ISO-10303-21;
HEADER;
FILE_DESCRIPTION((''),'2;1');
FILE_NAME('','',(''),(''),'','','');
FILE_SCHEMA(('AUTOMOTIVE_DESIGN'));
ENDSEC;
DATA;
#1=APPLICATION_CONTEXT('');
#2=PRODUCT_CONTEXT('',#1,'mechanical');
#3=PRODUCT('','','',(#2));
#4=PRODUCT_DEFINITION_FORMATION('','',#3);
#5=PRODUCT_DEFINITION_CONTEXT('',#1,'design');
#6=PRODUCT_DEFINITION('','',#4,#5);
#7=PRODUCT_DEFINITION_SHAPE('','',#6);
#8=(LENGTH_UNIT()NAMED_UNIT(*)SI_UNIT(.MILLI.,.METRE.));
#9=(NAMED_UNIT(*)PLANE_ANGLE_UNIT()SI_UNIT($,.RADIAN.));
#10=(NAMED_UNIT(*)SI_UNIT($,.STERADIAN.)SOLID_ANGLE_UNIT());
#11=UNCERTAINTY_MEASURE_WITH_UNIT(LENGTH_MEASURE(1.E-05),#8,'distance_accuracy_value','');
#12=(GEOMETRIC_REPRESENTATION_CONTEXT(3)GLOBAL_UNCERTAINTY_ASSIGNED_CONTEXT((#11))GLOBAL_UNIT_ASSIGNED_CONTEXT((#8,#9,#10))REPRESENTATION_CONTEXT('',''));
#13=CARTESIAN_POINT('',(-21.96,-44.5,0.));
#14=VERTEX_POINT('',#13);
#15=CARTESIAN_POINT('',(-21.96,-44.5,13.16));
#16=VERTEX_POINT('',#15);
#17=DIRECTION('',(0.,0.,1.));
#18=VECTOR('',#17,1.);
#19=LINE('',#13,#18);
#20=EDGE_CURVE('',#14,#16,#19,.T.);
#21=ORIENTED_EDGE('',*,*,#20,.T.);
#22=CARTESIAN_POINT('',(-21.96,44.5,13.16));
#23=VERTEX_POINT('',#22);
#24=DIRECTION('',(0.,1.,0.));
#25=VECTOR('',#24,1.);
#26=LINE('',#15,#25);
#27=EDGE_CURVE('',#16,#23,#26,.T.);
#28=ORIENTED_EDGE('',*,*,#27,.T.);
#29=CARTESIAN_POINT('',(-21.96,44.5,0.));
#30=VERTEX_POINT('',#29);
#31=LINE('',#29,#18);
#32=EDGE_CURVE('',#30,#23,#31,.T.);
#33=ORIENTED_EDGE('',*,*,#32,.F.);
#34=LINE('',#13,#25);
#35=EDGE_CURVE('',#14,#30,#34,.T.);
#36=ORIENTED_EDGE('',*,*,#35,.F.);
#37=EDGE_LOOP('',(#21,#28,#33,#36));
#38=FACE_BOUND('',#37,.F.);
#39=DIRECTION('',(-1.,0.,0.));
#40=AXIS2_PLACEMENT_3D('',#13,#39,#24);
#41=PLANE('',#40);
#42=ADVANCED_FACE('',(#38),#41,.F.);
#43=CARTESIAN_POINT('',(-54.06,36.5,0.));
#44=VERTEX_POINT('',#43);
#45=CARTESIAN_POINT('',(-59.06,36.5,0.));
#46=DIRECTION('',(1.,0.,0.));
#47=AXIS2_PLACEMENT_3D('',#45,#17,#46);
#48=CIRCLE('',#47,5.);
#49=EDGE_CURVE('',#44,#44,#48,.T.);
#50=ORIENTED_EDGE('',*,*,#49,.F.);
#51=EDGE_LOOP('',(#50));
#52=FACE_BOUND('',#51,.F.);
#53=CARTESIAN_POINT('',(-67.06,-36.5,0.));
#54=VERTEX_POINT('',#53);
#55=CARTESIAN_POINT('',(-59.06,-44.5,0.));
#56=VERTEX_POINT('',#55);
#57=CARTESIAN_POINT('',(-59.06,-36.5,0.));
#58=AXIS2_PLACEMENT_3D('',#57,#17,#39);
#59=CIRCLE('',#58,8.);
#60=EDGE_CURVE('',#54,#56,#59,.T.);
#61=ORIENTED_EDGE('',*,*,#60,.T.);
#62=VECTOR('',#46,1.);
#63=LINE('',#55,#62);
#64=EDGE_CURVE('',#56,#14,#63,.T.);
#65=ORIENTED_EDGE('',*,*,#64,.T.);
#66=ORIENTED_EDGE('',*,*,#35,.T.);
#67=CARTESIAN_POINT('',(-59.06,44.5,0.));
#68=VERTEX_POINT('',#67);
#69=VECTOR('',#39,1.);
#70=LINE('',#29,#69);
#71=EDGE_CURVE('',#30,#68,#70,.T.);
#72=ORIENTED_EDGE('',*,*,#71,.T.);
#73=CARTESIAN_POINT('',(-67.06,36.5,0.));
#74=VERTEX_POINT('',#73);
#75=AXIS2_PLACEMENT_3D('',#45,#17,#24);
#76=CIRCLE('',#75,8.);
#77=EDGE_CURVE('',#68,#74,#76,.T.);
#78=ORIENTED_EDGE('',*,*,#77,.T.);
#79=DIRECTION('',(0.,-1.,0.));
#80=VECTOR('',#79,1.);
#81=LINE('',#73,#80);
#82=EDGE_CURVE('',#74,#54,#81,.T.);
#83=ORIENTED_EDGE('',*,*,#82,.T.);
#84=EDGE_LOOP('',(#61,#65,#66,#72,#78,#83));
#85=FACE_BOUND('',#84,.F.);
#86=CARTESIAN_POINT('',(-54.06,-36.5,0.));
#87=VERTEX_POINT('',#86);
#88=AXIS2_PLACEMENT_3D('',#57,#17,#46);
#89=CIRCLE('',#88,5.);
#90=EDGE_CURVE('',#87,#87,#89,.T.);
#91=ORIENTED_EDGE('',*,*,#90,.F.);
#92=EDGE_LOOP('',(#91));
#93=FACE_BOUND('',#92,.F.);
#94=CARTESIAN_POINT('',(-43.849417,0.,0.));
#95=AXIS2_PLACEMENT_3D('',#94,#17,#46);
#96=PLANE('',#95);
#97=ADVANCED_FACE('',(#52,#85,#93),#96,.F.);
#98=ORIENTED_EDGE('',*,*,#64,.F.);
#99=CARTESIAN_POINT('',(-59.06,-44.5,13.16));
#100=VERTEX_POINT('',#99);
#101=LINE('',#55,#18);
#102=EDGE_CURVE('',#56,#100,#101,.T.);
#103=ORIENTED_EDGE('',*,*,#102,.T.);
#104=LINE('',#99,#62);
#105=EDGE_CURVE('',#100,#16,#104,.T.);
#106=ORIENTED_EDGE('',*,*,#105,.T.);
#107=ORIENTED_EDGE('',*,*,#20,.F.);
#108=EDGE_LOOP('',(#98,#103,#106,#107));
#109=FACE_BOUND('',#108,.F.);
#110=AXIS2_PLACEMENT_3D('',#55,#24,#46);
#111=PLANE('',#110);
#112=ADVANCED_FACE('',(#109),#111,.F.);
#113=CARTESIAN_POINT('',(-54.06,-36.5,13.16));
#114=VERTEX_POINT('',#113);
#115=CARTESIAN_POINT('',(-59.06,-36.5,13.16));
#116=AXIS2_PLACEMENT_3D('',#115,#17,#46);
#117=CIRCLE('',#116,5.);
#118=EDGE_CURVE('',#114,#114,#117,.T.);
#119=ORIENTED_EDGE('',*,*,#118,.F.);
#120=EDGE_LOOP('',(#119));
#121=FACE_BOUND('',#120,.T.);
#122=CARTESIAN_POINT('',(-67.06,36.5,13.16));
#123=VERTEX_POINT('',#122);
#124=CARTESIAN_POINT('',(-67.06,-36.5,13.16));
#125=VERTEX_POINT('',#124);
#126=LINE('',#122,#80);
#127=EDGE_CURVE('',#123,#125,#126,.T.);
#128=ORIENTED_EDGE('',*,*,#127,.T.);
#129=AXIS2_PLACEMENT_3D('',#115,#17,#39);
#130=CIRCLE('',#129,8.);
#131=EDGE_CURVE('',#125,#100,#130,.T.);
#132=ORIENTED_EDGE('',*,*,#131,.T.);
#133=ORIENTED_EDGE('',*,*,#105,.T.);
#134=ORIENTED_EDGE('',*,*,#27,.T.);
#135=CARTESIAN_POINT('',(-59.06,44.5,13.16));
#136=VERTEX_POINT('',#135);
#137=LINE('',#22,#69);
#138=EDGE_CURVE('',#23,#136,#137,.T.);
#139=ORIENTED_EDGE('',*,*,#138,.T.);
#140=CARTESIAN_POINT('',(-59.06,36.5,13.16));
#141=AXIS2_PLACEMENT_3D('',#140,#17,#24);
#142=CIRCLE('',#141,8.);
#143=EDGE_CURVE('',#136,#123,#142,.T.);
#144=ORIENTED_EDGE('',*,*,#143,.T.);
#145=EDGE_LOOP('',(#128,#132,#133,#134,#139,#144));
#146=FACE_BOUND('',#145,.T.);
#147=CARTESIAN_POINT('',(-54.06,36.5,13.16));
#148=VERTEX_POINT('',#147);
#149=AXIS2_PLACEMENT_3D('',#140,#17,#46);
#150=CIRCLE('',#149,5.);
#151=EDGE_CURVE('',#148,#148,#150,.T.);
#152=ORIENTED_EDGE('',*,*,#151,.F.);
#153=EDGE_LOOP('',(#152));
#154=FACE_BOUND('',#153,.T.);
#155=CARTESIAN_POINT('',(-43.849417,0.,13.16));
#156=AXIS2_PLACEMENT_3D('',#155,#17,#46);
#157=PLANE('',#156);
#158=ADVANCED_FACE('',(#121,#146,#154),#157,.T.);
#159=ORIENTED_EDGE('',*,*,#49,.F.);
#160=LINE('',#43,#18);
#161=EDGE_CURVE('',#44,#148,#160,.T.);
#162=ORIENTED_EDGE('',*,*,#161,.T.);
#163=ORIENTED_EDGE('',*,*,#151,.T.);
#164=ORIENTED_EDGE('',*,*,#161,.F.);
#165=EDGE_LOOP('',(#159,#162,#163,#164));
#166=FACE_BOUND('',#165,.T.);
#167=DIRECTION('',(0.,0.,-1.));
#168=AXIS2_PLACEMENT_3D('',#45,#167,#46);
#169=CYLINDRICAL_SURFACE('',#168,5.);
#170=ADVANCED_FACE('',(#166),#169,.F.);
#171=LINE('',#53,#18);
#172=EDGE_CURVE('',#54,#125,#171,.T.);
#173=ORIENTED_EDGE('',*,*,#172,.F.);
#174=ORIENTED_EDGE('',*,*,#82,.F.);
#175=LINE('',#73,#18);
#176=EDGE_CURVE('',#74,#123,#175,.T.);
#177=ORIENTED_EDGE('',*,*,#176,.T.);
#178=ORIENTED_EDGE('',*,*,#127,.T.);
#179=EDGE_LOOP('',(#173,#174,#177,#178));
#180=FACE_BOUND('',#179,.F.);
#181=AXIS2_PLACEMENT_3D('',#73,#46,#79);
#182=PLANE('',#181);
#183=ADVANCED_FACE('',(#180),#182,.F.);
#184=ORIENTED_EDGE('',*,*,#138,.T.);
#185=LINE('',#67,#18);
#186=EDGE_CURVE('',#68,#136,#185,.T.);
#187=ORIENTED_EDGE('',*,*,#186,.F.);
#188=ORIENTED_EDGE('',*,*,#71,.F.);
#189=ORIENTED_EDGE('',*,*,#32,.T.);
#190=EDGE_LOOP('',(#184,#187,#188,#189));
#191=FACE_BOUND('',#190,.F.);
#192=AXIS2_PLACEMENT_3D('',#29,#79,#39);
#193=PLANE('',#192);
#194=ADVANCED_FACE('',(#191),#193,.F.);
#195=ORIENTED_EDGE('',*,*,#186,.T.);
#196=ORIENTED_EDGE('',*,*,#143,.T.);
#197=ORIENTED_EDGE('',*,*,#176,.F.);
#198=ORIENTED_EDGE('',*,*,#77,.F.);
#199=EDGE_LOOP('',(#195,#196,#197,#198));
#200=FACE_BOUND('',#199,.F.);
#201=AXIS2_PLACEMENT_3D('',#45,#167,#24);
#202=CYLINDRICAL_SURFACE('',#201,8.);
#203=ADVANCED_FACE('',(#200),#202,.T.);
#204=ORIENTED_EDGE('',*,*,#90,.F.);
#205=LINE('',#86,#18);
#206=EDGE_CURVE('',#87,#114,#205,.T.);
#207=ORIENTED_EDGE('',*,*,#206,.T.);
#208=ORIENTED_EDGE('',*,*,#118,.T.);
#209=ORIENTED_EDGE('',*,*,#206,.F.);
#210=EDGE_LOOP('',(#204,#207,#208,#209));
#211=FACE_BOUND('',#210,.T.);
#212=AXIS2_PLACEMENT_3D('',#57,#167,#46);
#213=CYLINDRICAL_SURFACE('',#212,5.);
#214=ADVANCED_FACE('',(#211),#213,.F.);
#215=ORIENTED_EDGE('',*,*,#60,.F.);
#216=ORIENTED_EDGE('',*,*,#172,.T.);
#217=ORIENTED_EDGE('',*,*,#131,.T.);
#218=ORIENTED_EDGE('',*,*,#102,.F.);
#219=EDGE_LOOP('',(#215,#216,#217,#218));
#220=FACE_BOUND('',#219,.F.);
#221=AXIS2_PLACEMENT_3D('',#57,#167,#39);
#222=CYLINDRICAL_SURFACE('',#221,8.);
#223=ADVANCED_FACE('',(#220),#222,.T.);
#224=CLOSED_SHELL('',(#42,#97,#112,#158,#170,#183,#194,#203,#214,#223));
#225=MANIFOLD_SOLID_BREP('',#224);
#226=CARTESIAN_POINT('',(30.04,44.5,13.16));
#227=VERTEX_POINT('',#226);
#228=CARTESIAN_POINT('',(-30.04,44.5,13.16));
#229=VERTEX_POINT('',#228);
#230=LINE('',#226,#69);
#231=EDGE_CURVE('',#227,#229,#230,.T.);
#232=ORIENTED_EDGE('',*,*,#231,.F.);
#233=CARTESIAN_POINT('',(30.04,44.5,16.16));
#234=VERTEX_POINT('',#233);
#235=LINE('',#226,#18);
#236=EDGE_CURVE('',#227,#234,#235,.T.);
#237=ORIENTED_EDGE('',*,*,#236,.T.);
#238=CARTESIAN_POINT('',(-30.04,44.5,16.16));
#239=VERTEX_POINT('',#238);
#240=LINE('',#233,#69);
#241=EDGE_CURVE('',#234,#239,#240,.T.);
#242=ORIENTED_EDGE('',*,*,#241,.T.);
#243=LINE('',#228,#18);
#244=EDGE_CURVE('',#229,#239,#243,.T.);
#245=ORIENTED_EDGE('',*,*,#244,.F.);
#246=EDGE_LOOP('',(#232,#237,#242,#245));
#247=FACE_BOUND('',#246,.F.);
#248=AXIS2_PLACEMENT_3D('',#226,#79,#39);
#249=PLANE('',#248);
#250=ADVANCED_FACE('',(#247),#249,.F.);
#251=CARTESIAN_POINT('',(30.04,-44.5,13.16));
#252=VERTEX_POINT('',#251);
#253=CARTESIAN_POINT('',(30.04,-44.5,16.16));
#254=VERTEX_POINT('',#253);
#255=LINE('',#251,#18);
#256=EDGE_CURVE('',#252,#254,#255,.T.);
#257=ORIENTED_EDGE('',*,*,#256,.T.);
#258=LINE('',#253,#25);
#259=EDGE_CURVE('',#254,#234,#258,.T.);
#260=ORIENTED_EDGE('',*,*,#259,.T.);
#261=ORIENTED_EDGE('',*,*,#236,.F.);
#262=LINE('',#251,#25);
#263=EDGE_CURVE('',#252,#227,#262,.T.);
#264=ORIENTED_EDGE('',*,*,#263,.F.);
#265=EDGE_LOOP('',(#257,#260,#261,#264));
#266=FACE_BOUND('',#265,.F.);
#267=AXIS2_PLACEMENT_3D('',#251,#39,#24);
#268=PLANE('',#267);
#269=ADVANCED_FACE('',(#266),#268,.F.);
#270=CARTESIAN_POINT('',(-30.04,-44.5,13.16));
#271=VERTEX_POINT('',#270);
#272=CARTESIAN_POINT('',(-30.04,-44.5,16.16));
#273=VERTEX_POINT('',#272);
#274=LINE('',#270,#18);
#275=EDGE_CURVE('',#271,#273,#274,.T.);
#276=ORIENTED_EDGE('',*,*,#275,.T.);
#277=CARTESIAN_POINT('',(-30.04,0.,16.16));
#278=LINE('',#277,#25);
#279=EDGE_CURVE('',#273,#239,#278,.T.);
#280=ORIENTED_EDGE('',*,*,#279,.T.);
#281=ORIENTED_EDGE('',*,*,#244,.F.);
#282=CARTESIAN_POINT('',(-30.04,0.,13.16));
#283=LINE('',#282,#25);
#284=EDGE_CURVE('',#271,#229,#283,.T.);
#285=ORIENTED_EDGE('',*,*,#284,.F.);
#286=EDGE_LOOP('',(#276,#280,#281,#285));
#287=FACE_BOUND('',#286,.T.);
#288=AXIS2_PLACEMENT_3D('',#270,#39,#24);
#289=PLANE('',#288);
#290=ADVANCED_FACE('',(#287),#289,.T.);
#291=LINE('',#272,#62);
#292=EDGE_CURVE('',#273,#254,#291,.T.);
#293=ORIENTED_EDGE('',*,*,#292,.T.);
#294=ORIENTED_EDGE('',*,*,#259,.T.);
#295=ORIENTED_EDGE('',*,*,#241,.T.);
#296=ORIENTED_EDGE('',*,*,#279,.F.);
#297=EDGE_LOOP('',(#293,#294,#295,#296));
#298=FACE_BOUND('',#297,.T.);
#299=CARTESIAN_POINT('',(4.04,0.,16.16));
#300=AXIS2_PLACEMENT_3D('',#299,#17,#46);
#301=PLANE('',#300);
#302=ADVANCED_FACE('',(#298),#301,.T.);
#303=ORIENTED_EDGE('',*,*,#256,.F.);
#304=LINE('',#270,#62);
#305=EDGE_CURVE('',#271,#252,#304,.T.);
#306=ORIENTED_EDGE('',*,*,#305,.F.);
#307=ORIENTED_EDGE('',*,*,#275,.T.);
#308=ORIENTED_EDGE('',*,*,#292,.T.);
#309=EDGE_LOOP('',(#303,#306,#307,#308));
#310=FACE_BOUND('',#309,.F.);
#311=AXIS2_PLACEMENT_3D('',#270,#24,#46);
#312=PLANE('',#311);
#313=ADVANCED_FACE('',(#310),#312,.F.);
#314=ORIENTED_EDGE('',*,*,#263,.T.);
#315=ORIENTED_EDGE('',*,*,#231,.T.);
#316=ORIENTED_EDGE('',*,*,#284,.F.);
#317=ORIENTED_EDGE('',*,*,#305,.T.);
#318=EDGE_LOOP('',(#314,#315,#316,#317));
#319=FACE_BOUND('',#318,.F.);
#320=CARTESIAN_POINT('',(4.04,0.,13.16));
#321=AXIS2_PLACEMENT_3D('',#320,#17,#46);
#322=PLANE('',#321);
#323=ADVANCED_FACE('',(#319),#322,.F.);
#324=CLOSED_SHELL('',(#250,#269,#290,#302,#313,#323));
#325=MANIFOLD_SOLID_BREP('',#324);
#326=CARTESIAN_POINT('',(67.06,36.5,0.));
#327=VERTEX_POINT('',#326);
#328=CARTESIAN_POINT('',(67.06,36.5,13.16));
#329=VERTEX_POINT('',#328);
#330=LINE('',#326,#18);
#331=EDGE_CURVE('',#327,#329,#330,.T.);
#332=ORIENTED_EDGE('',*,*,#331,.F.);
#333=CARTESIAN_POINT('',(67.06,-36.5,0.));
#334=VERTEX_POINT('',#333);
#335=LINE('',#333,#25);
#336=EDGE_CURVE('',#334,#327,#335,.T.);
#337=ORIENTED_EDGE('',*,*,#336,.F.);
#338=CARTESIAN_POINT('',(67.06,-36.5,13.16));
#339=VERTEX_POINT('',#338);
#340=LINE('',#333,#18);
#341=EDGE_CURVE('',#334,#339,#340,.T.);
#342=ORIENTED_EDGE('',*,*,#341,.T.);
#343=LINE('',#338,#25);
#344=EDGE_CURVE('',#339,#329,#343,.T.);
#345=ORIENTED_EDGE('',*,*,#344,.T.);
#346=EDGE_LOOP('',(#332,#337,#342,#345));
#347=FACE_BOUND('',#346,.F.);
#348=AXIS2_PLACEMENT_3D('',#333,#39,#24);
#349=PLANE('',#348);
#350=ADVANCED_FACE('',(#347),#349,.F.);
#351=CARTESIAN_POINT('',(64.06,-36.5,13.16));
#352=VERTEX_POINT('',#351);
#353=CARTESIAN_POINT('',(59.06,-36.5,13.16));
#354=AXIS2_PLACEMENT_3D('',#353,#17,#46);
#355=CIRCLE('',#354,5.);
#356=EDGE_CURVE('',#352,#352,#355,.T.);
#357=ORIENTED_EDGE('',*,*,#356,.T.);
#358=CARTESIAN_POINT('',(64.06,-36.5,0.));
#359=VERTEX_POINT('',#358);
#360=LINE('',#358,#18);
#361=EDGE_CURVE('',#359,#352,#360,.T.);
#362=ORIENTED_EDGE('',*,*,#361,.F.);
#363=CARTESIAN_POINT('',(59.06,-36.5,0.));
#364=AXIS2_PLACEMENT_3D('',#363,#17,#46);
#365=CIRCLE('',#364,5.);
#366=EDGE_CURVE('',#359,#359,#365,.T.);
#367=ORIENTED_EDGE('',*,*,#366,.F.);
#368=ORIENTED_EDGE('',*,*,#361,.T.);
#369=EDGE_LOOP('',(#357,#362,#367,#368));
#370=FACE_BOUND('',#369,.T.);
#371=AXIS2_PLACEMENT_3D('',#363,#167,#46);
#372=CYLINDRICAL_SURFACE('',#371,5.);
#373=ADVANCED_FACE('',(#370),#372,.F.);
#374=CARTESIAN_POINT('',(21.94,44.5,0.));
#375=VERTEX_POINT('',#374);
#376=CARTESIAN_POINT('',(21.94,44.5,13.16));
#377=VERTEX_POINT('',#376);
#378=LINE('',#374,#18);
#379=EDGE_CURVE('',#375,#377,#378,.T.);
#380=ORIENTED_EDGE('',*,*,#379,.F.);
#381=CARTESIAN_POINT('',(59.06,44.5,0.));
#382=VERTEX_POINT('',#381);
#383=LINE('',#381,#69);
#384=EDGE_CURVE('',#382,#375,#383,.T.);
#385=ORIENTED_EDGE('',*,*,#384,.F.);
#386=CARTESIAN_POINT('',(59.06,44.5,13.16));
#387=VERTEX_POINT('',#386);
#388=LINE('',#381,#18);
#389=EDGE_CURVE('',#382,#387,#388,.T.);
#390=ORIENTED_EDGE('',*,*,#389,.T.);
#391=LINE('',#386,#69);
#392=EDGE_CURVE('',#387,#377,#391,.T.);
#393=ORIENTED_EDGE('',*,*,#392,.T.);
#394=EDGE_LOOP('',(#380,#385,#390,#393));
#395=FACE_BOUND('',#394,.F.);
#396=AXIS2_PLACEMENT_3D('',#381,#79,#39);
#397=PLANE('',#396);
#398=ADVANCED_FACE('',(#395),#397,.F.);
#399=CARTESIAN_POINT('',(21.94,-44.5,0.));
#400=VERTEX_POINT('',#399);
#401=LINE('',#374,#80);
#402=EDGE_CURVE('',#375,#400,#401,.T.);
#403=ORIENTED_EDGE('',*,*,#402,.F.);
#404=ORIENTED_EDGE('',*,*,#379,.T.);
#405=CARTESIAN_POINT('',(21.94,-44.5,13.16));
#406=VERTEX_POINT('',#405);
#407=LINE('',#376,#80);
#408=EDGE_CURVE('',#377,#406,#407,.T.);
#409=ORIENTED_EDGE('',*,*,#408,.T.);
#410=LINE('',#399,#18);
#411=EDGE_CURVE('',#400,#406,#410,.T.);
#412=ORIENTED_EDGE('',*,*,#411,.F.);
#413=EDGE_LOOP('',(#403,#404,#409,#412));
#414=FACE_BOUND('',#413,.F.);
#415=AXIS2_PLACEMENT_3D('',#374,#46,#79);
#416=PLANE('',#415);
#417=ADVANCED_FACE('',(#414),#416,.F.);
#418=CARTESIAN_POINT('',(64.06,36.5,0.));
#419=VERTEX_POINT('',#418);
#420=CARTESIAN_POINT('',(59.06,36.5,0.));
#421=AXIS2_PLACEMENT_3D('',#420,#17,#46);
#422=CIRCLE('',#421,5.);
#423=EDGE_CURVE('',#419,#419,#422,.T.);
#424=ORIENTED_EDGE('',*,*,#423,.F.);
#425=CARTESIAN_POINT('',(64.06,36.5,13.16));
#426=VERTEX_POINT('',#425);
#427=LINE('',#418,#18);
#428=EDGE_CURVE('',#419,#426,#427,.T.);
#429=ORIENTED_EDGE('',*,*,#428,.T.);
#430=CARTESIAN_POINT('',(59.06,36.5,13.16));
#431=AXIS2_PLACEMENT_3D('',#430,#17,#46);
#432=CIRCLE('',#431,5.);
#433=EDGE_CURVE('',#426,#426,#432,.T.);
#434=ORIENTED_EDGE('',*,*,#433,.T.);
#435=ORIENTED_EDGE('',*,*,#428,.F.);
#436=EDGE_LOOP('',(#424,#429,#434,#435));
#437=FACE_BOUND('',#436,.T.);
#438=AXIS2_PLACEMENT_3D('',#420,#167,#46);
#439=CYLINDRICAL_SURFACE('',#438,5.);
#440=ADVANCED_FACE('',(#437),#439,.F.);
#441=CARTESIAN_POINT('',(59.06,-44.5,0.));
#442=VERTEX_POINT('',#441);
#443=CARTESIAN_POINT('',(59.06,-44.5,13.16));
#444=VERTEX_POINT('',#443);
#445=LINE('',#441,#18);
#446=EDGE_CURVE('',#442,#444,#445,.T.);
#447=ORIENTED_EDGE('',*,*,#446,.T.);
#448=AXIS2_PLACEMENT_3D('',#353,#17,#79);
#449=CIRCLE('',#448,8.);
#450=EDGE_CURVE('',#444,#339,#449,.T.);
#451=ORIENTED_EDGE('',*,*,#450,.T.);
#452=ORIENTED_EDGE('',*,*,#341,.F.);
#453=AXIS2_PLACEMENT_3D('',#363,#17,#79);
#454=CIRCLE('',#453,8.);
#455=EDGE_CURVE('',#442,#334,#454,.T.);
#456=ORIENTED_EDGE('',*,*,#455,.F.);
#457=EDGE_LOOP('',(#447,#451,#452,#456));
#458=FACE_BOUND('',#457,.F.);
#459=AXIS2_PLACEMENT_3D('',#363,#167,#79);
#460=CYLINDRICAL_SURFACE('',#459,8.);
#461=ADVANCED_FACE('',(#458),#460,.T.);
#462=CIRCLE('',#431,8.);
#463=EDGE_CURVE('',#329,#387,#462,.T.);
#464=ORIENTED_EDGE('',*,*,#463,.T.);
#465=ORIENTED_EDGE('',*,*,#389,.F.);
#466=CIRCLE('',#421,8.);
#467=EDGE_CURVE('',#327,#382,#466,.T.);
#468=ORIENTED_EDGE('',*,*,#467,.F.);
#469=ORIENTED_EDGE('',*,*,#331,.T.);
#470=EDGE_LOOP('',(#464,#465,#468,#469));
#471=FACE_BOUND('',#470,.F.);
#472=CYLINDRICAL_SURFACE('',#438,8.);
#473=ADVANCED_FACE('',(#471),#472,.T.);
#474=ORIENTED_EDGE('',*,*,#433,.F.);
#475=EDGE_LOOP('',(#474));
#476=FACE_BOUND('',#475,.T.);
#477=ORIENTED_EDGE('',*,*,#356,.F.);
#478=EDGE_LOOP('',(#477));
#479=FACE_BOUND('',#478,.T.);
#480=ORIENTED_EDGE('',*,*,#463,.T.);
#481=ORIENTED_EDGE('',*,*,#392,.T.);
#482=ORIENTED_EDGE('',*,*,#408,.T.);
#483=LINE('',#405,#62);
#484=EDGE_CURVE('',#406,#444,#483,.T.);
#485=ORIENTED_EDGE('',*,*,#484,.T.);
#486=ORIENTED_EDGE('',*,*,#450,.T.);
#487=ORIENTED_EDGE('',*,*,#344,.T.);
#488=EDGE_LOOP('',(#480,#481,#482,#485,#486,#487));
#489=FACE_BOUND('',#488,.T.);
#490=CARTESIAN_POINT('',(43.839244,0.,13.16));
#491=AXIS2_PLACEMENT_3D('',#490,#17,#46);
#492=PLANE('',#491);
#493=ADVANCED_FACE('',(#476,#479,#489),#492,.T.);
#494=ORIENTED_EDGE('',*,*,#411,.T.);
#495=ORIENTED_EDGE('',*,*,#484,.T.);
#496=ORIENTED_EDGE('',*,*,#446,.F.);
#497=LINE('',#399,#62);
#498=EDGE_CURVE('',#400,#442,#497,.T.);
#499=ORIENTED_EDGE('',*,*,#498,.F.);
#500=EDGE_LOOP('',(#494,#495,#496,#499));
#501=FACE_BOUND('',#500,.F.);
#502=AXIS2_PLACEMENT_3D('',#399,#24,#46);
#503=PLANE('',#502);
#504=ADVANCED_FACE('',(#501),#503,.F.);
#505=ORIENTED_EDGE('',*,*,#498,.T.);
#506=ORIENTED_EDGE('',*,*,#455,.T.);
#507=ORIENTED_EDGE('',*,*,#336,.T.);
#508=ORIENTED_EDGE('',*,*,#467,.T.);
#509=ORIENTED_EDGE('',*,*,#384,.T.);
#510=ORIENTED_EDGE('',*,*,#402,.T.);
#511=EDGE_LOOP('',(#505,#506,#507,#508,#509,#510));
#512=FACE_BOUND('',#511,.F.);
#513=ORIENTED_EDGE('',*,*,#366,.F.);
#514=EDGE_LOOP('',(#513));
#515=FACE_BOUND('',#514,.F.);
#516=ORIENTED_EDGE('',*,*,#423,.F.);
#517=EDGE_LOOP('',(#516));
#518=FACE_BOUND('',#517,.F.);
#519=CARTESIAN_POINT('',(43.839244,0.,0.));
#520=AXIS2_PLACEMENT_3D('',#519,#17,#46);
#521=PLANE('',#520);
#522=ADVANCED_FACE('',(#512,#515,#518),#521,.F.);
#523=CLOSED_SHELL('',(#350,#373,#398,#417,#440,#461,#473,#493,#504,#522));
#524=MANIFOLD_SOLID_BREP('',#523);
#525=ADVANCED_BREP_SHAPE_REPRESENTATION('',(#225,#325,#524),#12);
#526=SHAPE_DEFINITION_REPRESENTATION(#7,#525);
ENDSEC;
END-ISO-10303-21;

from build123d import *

# Parameters (mm, degrees)
F0_R     = 5
F1_DEPTH = 13.16
F2_W     = 8.08
F2_H     = 89
F3_DEPTH = 3
F4_DEPTH = 170


# Not quite as in the source:
# - an extrude ends at something that could not be found from the text; its depth is read off the source's solid


with BuildPart() as f1:
    # F0 (on Top) → F1 (new body)
    with BuildSketch(Plane.XY):
        with BuildLine():
            Line((-59.06, -44.5), (-21.96, -44.5))
            Line((-21.96, -44.5), (-21.96, 44.5))
            Line((-21.96, 44.5), (-59.06, 44.5))
            ThreePointArc((-59.06, 44.5), (-64.7168542495, 42.1568542495), (-67.06, 36.5))
            Line((-67.06, 36.5), (-67.06, -36.5))
            ThreePointArc((-67.06, -36.5), (-64.7168542495, -42.1568542495), (-59.06, -44.5))
        make_face()
        with Locations((-59.06, -36.5)):
            Circle(F0_R, mode=Mode.SUBTRACT)
        with Locations((-59.06, 36.5)):
            Circle(F0_R, mode=Mode.SUBTRACT)
    extrude(amount=F1_DEPTH)

    # F0 (on Top) → F4 (cut, through all)
    with BuildSketch(Plane.XY):
        with Locations((59.06, -36.5)):
            Circle(F0_R)
        with Locations((-59.06, -36.5)):
            Circle(F0_R)
        with Locations((-59.06, 36.5)):
            Circle(F0_R)
        with Locations((59.06, 36.5)):
            Circle(F0_R)
    extrude(amount=-F4_DEPTH, mode=Mode.SUBTRACT)


with BuildPart() as f1b:
    # F0 (on Top) → F1, piece 2 (new body)
    with BuildSketch(Plane.XY):
        with BuildLine():
            Line((21.94, -44.5), (59.06, -44.5))
            ThreePointArc((59.06, -44.5), (64.7168542495, -42.1568542495), (67.06, -36.5))
            Line((67.06, -36.5), (67.06, 36.5))
            ThreePointArc((67.06, 36.5), (64.7168542495, 42.1568542495), (59.06, 44.5))
            Line((59.06, 44.5), (21.94, 44.5))
            Line((21.94, 44.5), (21.94, -44.5))
        make_face()
        with Locations((59.06, -36.5)):
            Circle(F0_R, mode=Mode.SUBTRACT)
        with Locations((59.06, 36.5)):
            Circle(F0_R, mode=Mode.SUBTRACT)
    extrude(amount=F1_DEPTH)


with BuildPart() as f3:
    # F2 (on face) → F3 (new body)
    with BuildSketch(Plane.XY.offset(13.16)):
        Polygon((30.04, 44.5), (0, 44.5), (-21.96, 44.5), (-21.96, -44.5), (30.04, -44.5), align=None)
        with Locations((-26, 0)):
            Rectangle(F2_W, F2_H)
    extrude(amount=F3_DEPTH)


solid = Compound([f1.part, f1b.part, f3.part])
